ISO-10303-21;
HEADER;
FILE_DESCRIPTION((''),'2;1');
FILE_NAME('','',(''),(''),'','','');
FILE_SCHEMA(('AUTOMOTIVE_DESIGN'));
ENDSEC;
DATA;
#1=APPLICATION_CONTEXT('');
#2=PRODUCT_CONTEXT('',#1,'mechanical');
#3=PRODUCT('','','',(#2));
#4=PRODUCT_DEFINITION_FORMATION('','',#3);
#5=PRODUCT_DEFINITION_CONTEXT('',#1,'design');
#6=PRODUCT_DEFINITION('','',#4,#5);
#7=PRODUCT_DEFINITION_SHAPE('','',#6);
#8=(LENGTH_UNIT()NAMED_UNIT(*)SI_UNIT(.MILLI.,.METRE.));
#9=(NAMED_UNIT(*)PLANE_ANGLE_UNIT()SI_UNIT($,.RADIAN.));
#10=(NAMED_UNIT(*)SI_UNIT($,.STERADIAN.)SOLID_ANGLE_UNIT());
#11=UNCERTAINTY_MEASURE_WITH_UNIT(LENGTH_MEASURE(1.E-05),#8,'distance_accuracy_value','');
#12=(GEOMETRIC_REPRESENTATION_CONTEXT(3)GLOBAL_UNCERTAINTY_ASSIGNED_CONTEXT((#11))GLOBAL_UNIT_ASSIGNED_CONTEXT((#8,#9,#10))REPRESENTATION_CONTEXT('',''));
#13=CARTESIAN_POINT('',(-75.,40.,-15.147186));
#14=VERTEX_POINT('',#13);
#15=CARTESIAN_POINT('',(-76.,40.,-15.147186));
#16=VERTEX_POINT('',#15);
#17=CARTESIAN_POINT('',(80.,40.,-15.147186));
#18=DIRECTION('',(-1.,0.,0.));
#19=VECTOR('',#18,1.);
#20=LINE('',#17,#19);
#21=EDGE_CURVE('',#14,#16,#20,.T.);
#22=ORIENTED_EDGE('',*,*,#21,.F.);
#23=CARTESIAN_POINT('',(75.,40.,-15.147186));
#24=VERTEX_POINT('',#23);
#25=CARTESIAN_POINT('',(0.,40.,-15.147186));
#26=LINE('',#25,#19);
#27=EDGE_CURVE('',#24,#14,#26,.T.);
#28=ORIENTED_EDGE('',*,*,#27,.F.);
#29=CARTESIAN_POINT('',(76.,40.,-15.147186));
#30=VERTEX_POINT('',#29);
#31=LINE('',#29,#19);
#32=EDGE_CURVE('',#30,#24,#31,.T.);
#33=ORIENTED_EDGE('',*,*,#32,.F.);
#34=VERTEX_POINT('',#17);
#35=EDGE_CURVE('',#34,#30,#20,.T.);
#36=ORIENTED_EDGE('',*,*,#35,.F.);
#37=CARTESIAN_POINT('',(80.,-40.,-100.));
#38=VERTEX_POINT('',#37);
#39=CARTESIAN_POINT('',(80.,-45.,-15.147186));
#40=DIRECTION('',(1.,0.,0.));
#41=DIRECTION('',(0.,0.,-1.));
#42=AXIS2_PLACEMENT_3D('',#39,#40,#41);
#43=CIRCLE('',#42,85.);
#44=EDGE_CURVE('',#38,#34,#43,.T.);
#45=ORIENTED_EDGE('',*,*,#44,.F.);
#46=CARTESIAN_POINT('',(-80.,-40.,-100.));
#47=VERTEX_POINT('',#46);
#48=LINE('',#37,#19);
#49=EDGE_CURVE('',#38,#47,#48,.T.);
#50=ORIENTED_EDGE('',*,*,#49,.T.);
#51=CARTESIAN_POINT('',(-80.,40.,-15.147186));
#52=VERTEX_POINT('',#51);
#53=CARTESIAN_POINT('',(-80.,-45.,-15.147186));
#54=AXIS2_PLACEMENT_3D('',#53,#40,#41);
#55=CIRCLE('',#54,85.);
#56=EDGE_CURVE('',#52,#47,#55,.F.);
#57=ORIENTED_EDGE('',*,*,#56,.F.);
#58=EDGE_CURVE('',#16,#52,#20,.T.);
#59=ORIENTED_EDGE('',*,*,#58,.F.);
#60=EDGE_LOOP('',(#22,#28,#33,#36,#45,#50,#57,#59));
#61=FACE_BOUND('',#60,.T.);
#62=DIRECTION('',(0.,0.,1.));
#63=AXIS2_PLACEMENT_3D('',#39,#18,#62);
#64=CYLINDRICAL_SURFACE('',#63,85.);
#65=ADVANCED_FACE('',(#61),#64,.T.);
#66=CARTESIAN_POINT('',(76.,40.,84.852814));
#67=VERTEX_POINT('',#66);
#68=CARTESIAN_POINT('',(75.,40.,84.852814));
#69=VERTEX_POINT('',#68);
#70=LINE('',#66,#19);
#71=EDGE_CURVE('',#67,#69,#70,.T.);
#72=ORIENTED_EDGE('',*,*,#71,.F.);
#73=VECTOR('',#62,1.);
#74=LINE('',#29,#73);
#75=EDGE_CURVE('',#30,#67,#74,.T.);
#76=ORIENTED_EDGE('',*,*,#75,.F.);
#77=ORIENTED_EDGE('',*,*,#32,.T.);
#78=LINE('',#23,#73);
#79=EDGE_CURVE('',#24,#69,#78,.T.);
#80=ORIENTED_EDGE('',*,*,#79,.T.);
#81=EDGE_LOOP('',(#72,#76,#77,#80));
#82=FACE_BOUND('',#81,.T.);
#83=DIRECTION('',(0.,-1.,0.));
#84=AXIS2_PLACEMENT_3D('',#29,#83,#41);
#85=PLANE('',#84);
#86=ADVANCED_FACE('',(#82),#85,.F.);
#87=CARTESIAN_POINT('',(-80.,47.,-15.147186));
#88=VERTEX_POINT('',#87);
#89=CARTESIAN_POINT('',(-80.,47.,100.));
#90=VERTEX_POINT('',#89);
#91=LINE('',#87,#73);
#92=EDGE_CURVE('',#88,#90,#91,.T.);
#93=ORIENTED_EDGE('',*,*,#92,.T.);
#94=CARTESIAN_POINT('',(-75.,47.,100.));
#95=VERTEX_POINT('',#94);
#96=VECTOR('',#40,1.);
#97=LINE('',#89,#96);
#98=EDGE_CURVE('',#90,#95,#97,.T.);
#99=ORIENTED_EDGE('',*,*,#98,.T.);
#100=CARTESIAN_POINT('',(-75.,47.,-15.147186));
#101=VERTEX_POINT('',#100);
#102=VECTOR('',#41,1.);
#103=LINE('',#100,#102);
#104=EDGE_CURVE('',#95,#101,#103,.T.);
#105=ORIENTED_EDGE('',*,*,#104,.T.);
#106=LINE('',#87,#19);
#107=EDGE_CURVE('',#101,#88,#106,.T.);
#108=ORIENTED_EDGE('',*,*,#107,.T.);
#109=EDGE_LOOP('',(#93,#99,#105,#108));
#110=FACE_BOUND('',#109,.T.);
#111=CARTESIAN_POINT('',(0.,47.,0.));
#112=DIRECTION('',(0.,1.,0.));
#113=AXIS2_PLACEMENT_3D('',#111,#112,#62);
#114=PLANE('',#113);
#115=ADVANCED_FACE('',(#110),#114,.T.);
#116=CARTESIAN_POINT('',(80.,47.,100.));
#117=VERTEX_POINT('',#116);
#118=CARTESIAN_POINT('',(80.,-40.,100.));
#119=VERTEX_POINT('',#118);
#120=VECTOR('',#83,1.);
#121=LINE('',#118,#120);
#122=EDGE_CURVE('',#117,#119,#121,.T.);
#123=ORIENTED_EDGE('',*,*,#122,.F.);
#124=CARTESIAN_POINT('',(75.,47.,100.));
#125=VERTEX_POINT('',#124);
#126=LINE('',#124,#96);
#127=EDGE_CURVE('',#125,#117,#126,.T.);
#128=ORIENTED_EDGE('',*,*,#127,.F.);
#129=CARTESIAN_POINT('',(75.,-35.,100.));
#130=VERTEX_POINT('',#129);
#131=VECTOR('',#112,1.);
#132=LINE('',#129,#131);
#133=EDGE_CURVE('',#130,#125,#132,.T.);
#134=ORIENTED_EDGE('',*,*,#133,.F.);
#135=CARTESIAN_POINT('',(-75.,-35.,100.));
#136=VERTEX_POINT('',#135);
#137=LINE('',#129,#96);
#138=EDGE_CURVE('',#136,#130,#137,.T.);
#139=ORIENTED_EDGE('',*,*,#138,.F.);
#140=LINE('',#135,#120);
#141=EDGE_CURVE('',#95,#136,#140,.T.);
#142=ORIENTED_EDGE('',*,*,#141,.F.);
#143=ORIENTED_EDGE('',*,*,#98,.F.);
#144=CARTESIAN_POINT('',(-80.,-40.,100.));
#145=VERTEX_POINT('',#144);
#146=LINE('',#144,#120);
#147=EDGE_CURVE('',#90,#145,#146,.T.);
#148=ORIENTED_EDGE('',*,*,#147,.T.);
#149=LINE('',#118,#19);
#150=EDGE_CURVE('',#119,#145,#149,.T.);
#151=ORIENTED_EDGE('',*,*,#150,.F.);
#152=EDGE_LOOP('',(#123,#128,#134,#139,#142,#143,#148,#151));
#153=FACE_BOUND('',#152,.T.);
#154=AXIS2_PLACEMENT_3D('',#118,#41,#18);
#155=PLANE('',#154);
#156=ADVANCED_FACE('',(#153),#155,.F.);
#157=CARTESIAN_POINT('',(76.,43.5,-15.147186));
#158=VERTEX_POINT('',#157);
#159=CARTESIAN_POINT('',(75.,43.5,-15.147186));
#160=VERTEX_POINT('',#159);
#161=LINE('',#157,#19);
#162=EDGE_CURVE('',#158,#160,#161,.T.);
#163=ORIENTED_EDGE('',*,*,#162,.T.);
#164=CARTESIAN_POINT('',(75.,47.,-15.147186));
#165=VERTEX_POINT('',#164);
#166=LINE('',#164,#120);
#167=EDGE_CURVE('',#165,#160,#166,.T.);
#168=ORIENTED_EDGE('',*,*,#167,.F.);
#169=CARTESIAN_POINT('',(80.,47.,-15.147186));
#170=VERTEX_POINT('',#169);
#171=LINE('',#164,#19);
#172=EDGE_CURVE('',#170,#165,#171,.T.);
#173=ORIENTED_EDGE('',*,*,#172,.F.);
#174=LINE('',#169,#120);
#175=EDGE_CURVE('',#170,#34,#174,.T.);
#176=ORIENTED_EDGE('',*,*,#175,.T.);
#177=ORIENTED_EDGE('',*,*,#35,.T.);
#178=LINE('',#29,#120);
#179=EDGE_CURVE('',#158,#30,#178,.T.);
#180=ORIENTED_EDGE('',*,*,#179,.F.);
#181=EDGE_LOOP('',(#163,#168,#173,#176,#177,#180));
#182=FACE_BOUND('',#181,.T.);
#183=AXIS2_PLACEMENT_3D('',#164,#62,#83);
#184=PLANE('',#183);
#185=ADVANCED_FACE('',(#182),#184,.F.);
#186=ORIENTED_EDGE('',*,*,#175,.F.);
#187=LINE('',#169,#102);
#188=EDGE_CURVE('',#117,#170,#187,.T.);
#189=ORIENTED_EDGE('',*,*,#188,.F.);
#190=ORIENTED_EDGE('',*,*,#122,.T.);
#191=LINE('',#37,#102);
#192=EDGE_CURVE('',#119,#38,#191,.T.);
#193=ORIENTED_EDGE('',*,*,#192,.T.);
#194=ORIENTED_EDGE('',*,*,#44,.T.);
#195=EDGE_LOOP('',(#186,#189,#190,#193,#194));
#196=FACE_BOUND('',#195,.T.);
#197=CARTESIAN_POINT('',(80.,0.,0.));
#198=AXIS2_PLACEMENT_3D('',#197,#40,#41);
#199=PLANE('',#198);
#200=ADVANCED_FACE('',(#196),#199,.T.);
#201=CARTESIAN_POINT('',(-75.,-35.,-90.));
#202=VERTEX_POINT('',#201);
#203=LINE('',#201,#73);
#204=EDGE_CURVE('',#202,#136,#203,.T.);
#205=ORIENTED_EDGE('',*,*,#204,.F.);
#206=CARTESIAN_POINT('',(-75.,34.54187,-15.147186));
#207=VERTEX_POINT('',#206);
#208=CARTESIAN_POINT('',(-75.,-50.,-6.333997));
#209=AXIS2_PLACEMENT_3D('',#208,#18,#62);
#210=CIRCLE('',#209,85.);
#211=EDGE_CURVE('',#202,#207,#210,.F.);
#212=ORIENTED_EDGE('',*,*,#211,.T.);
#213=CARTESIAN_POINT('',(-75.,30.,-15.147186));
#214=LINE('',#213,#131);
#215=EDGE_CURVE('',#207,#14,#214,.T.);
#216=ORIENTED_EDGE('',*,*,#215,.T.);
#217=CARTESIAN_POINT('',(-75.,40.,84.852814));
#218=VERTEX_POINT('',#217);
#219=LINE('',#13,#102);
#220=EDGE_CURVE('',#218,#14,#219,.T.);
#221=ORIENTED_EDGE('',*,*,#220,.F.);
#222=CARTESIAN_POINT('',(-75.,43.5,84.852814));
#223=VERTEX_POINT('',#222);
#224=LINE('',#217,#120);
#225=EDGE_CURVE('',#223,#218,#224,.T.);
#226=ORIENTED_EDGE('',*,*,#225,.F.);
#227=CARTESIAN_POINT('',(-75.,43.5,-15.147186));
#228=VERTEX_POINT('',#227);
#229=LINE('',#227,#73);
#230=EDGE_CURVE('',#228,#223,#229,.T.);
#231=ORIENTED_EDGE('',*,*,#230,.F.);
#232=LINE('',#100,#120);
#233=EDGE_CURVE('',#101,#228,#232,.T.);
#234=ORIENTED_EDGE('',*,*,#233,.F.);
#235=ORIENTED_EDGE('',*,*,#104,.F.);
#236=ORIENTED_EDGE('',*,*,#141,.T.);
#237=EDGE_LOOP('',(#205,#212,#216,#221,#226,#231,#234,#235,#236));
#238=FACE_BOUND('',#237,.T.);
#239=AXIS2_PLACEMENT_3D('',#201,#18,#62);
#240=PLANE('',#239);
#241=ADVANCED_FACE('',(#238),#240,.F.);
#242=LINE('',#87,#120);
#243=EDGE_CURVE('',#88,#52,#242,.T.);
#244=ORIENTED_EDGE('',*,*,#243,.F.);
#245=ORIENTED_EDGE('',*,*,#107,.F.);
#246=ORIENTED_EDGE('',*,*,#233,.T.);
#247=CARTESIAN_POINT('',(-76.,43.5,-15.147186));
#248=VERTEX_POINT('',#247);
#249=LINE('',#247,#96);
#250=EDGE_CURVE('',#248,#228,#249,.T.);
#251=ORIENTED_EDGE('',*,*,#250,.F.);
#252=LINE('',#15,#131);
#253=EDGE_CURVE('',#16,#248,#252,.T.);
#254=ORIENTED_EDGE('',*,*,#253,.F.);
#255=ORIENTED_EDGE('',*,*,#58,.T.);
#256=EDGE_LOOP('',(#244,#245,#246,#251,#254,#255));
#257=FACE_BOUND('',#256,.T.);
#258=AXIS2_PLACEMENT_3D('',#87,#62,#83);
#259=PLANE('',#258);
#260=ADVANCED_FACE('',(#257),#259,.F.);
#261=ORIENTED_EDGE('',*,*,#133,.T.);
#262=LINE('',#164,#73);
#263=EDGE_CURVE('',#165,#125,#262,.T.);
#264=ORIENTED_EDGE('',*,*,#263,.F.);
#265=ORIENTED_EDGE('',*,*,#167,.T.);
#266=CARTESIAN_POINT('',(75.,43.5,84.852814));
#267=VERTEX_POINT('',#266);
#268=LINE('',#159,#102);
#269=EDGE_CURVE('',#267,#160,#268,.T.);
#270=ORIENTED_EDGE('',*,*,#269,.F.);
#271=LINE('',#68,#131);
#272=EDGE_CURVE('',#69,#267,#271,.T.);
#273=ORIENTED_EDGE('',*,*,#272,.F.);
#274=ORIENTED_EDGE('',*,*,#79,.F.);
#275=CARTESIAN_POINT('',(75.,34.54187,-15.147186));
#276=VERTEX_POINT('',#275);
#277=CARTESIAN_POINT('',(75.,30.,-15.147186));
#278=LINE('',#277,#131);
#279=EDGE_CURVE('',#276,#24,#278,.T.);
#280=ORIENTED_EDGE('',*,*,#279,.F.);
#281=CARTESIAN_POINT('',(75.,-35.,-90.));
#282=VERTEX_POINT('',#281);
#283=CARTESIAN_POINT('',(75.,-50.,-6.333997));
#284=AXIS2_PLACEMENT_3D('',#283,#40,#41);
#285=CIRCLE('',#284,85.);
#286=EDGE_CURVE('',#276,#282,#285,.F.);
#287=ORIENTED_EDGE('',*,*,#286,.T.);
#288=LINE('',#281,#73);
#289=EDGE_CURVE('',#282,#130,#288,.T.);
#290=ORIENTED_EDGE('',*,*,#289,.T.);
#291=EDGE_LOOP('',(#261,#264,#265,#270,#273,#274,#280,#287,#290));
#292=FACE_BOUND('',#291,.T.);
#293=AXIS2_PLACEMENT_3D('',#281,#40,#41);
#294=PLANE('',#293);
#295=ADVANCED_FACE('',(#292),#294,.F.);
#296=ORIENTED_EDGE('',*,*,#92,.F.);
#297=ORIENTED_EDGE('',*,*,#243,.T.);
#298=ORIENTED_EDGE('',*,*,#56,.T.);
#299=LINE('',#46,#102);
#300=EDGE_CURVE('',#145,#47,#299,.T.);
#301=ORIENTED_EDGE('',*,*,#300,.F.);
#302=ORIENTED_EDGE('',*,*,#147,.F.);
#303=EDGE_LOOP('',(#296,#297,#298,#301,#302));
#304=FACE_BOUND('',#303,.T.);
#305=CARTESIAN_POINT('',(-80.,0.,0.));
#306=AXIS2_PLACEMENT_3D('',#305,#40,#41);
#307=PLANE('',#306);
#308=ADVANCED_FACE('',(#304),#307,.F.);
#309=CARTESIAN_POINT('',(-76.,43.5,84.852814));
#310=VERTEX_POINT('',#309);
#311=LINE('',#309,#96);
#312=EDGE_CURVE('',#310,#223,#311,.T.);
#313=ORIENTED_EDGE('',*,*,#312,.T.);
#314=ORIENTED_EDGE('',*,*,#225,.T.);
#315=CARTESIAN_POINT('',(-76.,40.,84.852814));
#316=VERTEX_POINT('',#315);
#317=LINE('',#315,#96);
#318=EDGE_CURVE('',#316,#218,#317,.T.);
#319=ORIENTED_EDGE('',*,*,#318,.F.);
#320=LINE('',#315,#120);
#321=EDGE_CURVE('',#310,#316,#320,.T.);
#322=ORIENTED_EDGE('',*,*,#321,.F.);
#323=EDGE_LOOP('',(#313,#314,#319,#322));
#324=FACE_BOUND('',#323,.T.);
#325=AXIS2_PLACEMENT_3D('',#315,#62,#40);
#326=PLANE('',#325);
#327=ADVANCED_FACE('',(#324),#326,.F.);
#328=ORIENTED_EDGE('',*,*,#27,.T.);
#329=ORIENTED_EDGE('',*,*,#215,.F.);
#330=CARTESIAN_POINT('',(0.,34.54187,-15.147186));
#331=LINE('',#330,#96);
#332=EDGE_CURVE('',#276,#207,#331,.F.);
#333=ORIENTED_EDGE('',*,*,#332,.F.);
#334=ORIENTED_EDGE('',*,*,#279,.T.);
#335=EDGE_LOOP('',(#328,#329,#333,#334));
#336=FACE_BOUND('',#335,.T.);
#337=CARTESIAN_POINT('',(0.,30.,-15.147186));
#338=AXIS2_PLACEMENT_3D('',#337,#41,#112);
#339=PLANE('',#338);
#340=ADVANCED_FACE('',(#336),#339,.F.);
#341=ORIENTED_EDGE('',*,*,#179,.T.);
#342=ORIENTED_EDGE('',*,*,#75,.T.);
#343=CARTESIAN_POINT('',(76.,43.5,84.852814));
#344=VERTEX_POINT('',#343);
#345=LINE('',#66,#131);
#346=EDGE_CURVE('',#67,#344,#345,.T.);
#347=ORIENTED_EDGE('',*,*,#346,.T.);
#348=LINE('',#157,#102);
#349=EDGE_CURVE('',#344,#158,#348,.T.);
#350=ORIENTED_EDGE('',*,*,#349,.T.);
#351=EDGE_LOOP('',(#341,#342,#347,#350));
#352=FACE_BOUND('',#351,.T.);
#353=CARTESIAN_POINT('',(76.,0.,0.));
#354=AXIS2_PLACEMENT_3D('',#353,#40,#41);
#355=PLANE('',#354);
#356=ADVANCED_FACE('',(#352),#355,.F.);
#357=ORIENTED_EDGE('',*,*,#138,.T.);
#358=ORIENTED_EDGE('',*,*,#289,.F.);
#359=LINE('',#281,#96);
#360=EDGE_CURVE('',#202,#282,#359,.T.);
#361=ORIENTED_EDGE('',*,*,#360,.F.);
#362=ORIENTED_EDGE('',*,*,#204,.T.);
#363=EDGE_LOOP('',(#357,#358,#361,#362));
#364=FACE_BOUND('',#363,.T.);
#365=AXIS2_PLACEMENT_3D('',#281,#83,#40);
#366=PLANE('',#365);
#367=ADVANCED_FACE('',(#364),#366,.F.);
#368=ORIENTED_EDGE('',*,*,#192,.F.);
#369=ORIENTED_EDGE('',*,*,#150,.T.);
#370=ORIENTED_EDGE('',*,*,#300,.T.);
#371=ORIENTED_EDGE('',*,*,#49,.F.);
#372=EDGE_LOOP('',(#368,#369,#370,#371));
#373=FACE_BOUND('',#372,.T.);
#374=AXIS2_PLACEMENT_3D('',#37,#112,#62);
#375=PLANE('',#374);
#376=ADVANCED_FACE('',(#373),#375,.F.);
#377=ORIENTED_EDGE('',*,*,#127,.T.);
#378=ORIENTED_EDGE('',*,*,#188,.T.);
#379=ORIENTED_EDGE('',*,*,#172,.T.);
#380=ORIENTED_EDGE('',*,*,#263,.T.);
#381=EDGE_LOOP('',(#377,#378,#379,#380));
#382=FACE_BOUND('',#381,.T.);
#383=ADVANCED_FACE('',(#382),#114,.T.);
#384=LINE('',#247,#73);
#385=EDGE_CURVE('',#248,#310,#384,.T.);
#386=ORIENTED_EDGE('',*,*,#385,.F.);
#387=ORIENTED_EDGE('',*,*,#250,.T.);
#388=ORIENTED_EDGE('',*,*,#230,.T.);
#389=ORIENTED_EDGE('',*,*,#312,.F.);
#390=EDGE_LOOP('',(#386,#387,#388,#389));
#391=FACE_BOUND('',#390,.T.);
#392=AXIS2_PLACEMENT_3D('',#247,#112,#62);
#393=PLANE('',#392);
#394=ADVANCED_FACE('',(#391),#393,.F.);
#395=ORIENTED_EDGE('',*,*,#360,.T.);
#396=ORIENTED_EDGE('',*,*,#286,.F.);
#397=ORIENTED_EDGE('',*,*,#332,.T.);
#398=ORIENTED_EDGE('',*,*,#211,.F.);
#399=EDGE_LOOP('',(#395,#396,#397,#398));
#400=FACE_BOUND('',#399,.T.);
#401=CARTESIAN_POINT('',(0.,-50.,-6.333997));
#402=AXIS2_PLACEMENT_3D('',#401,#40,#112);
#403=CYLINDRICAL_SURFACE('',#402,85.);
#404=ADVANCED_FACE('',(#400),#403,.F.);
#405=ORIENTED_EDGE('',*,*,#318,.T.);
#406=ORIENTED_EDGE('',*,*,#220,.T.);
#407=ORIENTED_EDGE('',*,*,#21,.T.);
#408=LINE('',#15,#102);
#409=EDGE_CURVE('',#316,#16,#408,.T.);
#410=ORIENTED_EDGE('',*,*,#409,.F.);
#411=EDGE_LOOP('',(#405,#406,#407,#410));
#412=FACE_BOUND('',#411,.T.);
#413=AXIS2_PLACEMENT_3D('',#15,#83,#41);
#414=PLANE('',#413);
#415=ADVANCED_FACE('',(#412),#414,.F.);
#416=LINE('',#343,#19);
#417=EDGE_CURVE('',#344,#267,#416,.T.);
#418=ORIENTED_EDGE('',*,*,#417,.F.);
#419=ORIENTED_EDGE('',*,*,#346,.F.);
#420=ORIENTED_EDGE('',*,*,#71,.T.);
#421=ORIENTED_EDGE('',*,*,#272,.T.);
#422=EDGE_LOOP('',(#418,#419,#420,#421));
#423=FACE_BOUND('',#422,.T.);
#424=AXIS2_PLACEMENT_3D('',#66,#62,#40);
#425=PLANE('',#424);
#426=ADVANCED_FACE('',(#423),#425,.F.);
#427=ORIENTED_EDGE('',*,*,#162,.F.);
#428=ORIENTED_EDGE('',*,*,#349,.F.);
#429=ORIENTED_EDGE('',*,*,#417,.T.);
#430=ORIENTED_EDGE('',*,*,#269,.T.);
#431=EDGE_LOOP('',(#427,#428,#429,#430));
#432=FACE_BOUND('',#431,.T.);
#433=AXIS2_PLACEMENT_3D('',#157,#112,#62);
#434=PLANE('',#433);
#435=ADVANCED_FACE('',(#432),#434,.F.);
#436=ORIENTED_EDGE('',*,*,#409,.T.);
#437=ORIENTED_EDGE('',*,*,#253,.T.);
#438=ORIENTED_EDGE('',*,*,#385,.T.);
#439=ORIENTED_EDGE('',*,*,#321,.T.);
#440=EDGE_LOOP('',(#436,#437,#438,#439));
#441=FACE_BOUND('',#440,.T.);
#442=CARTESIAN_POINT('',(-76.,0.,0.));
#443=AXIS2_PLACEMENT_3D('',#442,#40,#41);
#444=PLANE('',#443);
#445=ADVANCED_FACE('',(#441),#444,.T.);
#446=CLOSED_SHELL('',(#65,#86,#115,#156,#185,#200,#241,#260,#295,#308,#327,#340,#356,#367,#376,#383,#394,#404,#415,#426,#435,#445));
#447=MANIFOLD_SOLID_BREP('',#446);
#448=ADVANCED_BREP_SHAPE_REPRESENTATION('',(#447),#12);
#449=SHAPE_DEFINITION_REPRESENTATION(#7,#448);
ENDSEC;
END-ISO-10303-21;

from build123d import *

# Parameters (mm, degrees)
SKETCH1_W           = 200
SKETCH1_H           = 80
BOSS_EXTRUDE1_DEPTH = 80
SKETCH2_W           = 150
SKETCH2_H           = 70
CUT_EXTRUDE2_DEPTH  = 190
FILLET5_R           = 85
CUT_EXTRUDE6_DEPTH  = 10
SKETCH9_W           = 5
SKETCH9_H           = 115.147186258
BOSS_EXTRUDE2_DEPTH = 7
SKETCH10_W          = 5
SKETCH10_H          = 115.147186258
BOSS_EXTRUDE3_DEPTH = 7
SKETCH13_W          = 100
SKETCH13_H          = 3.5
CUT_EXTRUDE9_DEPTH  = 1
SKETCH14_W          = 100
SKETCH14_H          = 3.5
CUT_EXTRUDE10_DEPTH = 1


with BuildPart() as part:
    # Sketch1 → Boss-Extrude1 (new, symmetric)
    with BuildSketch(Plane(origin=(0, 0, 0), x_dir=(0, 0, -1), z_dir=(1, 0, 0))):
        Rectangle(SKETCH1_W, SKETCH1_H)
    extrude(amount=BOSS_EXTRUDE1_DEPTH, both=True)

    # Sketch2 → Cut-Extrude2 (cut)
    with BuildSketch(Plane.XY.offset(100)):
        Rectangle(SKETCH2_W, SKETCH2_H)
    extrude(amount=-CUT_EXTRUDE2_DEPTH, mode=Mode.SUBTRACT)

    # Fillet5
    # the kernel refuses this fillet: 85 mm, written as the material it adds along each edge
    with BuildSketch(Plane(origin=(-75, 35, -90), x_dir=(0, 0, 1), z_dir=(1, 0, 0))) as fillet5_piece_1:
        with BuildLine():
            CenterArc((83.666002653, 85), FILLET5_R, 190.164248622, 79.835751378)
            Line((0, 70), (-1.673320053, 69.7))
            ThreePointArc((-1.673320053, 69.7), (-1.7, 35), (-1.7, 0))
            Line((-1.7, 0), (0, -1.7))
            Line((0, -1.7), (83.666002653, -1.7))
            Line((83.666002653, -1.7), (83.666002653, 0))
        make_face()
    extrude(amount=150)
    # the kernel refuses this fillet: 85 mm, written as the material it takes off along each edge
    with BuildSketch(Plane(origin=(-292.132034356, 40, -100), x_dir=(0, -1, 0), z_dir=(1, 0, 0))) as fillet5_2_piece_1:
        with BuildLine():
            CenterArc((85, -84.852813742), FILLET5_R, 93.372286683, 86.627713317)
            Line((0, -84.852813742), (-1.7, -84.852813742))
            Line((-1.7, -84.852813742), (-1.7, 0))
            Line((-1.7, 0), (0, 1.7))
            ThreePointArc((0, 1.7), (40, 1.7), (79.9, 1.697056275))
            Line((79.9, 1.697056275), (80, 0))
        make_face()
    extrude(amount=584.264068712, mode=Mode.SUBTRACT)

    # Sketch8 → Cut-Extrude6 (cut)
    with BuildSketch(Plane(origin=(0, 40, 0), x_dir=(1, 0, 0), z_dir=(0, 1, 0))):
        Polygon((0, 15.147186258), (-75, 15.147186258), (-75, -100), (75, -100), (75, 15.147186258), align=None)
    extrude(amount=-CUT_EXTRUDE6_DEPTH, mode=Mode.SUBTRACT)

    # Sketch9 → Boss-Extrude2 (add)
    with BuildSketch(Plane(origin=(0, 40, 0), x_dir=(1, 0, 0), z_dir=(0, 1, 0))):
        with Locations((-77.5, -42.426406871)):
            Rectangle(SKETCH9_W, SKETCH9_H)
    extrude(amount=BOSS_EXTRUDE2_DEPTH)

    # Sketch10 → Boss-Extrude3 (add)
    with BuildSketch(Plane(origin=(0, 40, 0), x_dir=(1, 0, 0), z_dir=(0, 1, 0))):
        with Locations((77.5, -42.426406871)):
            Rectangle(SKETCH10_W, SKETCH10_H)
    extrude(amount=BOSS_EXTRUDE3_DEPTH)

    # Sketch13 → Cut-Extrude9 (cut)
    with BuildSketch(Plane(origin=(-75, 0, 0), x_dir=(0, 0, -1), z_dir=(1, 0, 0))):
        with Locations((-34.852813742, 41.75)):
            Rectangle(SKETCH13_W, SKETCH13_H)
    extrude(amount=-CUT_EXTRUDE9_DEPTH, mode=Mode.SUBTRACT)

    # Sketch14 → Cut-Extrude10 (cut)
    with BuildSketch(Plane.ZY.offset(-75)):
        with Locations((34.852813742, 41.75)):
            Rectangle(SKETCH14_W, SKETCH14_H)
    extrude(amount=-CUT_EXTRUDE10_DEPTH, mode=Mode.SUBTRACT)


solid = part.part
